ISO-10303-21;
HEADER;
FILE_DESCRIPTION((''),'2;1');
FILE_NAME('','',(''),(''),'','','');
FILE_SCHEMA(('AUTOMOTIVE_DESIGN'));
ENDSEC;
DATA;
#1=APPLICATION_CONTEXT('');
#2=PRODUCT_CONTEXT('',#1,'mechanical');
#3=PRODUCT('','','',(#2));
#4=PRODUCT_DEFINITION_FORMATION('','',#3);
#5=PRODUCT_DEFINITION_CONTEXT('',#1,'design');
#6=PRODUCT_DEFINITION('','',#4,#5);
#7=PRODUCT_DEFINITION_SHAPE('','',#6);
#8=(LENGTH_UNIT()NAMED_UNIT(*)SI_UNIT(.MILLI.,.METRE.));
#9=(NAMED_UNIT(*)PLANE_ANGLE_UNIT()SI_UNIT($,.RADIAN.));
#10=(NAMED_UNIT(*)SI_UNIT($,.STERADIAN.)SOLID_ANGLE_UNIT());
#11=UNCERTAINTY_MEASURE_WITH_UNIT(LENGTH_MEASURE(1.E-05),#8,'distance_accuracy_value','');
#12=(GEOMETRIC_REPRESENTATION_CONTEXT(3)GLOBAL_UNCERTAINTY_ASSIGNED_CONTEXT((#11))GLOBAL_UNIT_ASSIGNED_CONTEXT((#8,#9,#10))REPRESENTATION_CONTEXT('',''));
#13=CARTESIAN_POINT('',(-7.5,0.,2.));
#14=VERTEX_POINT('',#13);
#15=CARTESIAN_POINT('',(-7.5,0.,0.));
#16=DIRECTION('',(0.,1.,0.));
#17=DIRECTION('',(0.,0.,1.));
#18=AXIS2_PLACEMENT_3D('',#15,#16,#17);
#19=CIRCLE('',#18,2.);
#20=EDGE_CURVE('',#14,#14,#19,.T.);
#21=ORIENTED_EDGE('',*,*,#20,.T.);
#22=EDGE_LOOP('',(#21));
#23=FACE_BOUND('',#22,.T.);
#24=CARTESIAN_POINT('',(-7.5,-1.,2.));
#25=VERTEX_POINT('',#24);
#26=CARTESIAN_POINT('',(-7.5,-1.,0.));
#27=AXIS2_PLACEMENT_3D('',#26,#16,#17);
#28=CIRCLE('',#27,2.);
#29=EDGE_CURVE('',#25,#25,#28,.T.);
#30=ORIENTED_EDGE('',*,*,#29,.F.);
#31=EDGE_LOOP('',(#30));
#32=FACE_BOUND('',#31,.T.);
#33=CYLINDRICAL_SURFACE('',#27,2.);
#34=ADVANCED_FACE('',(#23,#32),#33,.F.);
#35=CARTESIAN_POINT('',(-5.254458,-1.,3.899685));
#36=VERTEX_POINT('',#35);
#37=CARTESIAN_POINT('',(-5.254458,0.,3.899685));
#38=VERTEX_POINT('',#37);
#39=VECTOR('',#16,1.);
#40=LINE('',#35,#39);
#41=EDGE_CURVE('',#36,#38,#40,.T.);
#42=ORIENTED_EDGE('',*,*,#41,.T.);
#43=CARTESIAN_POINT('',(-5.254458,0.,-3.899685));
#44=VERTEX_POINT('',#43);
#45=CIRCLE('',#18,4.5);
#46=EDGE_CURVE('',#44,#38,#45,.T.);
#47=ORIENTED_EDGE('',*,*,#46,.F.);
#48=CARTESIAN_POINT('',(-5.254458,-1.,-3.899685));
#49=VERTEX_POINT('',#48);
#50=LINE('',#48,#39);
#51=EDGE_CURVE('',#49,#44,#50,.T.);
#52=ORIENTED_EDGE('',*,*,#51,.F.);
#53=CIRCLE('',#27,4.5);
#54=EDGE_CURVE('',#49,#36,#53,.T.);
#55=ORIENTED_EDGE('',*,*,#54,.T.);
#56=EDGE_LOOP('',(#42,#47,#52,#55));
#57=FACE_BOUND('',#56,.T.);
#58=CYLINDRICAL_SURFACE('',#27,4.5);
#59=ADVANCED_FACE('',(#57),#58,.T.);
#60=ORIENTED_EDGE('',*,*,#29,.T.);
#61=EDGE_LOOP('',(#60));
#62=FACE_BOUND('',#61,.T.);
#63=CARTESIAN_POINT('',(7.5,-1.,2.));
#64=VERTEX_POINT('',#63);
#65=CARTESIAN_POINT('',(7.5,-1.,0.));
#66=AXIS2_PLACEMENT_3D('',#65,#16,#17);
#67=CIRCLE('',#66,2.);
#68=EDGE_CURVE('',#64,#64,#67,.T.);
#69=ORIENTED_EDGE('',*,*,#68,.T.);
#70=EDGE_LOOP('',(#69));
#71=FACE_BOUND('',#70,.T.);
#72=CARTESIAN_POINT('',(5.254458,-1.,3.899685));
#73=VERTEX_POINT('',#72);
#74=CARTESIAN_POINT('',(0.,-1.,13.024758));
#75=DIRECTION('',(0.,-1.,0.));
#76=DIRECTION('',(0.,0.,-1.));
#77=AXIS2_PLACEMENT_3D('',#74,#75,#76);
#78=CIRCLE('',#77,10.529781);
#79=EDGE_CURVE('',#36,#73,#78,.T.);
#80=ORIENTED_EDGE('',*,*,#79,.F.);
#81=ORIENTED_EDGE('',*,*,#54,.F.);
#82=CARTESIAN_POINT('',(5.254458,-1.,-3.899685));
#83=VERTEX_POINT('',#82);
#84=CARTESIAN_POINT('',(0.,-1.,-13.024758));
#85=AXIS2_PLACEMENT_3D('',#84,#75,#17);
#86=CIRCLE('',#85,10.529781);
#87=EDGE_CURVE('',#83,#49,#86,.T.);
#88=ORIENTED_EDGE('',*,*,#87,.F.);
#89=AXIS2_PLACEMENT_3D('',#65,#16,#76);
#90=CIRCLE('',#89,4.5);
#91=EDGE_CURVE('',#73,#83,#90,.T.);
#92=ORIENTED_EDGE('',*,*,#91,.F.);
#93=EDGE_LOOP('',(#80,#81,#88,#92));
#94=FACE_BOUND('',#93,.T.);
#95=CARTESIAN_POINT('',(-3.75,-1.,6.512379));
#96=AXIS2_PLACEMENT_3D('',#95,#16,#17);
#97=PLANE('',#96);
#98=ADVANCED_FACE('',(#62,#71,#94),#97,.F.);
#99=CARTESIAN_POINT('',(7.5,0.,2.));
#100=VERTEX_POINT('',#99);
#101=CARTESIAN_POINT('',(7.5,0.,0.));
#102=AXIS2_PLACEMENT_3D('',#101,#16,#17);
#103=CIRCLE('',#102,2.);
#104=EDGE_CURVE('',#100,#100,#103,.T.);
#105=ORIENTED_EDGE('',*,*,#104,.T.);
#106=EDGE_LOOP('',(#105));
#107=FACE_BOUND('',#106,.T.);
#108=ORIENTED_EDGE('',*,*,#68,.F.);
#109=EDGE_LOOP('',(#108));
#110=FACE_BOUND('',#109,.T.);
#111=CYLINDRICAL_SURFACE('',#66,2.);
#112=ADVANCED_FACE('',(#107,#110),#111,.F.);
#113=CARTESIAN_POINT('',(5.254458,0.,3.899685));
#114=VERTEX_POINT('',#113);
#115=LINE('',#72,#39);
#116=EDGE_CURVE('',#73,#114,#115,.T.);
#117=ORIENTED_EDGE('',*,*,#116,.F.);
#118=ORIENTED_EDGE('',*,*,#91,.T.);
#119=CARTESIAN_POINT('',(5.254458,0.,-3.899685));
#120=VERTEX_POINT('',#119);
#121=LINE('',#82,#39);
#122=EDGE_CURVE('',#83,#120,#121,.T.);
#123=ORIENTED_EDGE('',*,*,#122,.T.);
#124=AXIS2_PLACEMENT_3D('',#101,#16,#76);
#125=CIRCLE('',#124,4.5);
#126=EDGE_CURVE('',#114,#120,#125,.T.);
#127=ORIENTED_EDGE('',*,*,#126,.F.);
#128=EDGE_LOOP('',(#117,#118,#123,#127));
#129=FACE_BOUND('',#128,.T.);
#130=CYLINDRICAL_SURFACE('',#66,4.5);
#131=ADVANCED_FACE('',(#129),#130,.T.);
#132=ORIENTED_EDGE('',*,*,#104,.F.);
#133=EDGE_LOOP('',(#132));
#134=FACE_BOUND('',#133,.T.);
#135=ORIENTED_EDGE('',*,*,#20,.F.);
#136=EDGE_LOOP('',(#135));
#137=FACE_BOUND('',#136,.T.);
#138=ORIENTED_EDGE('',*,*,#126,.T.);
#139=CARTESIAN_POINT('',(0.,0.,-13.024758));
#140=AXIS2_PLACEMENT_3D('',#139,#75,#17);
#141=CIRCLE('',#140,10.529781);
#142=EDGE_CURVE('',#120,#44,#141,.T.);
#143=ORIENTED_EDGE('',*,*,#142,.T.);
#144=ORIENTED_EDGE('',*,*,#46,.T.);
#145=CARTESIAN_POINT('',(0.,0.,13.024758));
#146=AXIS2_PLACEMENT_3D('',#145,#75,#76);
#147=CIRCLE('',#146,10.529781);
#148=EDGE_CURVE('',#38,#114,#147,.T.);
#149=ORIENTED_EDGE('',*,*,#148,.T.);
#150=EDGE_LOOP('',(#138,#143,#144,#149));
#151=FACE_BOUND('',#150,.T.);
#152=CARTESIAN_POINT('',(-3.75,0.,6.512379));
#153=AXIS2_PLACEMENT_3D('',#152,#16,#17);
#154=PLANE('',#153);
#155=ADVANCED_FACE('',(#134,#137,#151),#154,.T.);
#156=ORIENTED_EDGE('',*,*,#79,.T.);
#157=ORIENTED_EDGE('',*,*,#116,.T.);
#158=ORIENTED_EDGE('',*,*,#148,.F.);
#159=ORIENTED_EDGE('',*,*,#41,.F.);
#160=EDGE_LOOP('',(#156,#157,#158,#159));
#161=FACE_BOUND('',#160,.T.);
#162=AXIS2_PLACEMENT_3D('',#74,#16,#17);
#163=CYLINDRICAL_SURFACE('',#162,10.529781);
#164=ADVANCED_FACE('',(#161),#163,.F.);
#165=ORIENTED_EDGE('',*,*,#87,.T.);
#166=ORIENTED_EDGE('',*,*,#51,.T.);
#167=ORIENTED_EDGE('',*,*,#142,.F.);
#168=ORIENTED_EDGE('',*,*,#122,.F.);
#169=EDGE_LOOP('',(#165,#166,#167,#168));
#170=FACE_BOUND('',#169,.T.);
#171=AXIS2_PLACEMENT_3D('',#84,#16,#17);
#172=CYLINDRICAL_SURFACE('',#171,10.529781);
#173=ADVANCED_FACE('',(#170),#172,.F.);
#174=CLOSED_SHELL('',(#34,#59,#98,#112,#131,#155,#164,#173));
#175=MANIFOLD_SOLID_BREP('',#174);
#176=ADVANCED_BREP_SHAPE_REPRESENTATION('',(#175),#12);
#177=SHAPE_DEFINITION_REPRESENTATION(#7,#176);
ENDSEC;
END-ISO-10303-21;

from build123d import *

# Parameters (mm, degrees)
SKIZZE2_R          = 2
BASIS_BLECH1_DEPTH = 1


# Sheet-metal steps are written as plain solids
with BuildPart() as part:
    # Skizze2 → Basis-Blech1 (new body)
    with BuildSketch(Plane(origin=(0, 0, 0), x_dir=(1, 0, 0), z_dir=(0, 1, 0))):
        with BuildLine():
            ThreePointArc((-5.254458339, 3.899684942), (0, 2.494976886), (5.254458339, 3.899684942))
            ThreePointArc((5.254458339, 3.899684942), (12, 0), (5.254458339, -3.899684942))
            ThreePointArc((5.254458339, -3.899684942), (0, -2.494976886), (-5.254458339, -3.899684942))
            ThreePointArc((-5.254458339, -3.899684942), (-12, 0), (-5.254458339, 3.899684942))
        make_face()
        with Locations(Location((-7.5, 0, 0), (0, 0, 270))):
            Circle(SKIZZE2_R, mode=Mode.SUBTRACT)
        with Locations(Location((7.5, 0, 0), (0, 0, 270))):
            Circle(SKIZZE2_R, mode=Mode.SUBTRACT)
    extrude(amount=-BASIS_BLECH1_DEPTH)


solid = part.part
